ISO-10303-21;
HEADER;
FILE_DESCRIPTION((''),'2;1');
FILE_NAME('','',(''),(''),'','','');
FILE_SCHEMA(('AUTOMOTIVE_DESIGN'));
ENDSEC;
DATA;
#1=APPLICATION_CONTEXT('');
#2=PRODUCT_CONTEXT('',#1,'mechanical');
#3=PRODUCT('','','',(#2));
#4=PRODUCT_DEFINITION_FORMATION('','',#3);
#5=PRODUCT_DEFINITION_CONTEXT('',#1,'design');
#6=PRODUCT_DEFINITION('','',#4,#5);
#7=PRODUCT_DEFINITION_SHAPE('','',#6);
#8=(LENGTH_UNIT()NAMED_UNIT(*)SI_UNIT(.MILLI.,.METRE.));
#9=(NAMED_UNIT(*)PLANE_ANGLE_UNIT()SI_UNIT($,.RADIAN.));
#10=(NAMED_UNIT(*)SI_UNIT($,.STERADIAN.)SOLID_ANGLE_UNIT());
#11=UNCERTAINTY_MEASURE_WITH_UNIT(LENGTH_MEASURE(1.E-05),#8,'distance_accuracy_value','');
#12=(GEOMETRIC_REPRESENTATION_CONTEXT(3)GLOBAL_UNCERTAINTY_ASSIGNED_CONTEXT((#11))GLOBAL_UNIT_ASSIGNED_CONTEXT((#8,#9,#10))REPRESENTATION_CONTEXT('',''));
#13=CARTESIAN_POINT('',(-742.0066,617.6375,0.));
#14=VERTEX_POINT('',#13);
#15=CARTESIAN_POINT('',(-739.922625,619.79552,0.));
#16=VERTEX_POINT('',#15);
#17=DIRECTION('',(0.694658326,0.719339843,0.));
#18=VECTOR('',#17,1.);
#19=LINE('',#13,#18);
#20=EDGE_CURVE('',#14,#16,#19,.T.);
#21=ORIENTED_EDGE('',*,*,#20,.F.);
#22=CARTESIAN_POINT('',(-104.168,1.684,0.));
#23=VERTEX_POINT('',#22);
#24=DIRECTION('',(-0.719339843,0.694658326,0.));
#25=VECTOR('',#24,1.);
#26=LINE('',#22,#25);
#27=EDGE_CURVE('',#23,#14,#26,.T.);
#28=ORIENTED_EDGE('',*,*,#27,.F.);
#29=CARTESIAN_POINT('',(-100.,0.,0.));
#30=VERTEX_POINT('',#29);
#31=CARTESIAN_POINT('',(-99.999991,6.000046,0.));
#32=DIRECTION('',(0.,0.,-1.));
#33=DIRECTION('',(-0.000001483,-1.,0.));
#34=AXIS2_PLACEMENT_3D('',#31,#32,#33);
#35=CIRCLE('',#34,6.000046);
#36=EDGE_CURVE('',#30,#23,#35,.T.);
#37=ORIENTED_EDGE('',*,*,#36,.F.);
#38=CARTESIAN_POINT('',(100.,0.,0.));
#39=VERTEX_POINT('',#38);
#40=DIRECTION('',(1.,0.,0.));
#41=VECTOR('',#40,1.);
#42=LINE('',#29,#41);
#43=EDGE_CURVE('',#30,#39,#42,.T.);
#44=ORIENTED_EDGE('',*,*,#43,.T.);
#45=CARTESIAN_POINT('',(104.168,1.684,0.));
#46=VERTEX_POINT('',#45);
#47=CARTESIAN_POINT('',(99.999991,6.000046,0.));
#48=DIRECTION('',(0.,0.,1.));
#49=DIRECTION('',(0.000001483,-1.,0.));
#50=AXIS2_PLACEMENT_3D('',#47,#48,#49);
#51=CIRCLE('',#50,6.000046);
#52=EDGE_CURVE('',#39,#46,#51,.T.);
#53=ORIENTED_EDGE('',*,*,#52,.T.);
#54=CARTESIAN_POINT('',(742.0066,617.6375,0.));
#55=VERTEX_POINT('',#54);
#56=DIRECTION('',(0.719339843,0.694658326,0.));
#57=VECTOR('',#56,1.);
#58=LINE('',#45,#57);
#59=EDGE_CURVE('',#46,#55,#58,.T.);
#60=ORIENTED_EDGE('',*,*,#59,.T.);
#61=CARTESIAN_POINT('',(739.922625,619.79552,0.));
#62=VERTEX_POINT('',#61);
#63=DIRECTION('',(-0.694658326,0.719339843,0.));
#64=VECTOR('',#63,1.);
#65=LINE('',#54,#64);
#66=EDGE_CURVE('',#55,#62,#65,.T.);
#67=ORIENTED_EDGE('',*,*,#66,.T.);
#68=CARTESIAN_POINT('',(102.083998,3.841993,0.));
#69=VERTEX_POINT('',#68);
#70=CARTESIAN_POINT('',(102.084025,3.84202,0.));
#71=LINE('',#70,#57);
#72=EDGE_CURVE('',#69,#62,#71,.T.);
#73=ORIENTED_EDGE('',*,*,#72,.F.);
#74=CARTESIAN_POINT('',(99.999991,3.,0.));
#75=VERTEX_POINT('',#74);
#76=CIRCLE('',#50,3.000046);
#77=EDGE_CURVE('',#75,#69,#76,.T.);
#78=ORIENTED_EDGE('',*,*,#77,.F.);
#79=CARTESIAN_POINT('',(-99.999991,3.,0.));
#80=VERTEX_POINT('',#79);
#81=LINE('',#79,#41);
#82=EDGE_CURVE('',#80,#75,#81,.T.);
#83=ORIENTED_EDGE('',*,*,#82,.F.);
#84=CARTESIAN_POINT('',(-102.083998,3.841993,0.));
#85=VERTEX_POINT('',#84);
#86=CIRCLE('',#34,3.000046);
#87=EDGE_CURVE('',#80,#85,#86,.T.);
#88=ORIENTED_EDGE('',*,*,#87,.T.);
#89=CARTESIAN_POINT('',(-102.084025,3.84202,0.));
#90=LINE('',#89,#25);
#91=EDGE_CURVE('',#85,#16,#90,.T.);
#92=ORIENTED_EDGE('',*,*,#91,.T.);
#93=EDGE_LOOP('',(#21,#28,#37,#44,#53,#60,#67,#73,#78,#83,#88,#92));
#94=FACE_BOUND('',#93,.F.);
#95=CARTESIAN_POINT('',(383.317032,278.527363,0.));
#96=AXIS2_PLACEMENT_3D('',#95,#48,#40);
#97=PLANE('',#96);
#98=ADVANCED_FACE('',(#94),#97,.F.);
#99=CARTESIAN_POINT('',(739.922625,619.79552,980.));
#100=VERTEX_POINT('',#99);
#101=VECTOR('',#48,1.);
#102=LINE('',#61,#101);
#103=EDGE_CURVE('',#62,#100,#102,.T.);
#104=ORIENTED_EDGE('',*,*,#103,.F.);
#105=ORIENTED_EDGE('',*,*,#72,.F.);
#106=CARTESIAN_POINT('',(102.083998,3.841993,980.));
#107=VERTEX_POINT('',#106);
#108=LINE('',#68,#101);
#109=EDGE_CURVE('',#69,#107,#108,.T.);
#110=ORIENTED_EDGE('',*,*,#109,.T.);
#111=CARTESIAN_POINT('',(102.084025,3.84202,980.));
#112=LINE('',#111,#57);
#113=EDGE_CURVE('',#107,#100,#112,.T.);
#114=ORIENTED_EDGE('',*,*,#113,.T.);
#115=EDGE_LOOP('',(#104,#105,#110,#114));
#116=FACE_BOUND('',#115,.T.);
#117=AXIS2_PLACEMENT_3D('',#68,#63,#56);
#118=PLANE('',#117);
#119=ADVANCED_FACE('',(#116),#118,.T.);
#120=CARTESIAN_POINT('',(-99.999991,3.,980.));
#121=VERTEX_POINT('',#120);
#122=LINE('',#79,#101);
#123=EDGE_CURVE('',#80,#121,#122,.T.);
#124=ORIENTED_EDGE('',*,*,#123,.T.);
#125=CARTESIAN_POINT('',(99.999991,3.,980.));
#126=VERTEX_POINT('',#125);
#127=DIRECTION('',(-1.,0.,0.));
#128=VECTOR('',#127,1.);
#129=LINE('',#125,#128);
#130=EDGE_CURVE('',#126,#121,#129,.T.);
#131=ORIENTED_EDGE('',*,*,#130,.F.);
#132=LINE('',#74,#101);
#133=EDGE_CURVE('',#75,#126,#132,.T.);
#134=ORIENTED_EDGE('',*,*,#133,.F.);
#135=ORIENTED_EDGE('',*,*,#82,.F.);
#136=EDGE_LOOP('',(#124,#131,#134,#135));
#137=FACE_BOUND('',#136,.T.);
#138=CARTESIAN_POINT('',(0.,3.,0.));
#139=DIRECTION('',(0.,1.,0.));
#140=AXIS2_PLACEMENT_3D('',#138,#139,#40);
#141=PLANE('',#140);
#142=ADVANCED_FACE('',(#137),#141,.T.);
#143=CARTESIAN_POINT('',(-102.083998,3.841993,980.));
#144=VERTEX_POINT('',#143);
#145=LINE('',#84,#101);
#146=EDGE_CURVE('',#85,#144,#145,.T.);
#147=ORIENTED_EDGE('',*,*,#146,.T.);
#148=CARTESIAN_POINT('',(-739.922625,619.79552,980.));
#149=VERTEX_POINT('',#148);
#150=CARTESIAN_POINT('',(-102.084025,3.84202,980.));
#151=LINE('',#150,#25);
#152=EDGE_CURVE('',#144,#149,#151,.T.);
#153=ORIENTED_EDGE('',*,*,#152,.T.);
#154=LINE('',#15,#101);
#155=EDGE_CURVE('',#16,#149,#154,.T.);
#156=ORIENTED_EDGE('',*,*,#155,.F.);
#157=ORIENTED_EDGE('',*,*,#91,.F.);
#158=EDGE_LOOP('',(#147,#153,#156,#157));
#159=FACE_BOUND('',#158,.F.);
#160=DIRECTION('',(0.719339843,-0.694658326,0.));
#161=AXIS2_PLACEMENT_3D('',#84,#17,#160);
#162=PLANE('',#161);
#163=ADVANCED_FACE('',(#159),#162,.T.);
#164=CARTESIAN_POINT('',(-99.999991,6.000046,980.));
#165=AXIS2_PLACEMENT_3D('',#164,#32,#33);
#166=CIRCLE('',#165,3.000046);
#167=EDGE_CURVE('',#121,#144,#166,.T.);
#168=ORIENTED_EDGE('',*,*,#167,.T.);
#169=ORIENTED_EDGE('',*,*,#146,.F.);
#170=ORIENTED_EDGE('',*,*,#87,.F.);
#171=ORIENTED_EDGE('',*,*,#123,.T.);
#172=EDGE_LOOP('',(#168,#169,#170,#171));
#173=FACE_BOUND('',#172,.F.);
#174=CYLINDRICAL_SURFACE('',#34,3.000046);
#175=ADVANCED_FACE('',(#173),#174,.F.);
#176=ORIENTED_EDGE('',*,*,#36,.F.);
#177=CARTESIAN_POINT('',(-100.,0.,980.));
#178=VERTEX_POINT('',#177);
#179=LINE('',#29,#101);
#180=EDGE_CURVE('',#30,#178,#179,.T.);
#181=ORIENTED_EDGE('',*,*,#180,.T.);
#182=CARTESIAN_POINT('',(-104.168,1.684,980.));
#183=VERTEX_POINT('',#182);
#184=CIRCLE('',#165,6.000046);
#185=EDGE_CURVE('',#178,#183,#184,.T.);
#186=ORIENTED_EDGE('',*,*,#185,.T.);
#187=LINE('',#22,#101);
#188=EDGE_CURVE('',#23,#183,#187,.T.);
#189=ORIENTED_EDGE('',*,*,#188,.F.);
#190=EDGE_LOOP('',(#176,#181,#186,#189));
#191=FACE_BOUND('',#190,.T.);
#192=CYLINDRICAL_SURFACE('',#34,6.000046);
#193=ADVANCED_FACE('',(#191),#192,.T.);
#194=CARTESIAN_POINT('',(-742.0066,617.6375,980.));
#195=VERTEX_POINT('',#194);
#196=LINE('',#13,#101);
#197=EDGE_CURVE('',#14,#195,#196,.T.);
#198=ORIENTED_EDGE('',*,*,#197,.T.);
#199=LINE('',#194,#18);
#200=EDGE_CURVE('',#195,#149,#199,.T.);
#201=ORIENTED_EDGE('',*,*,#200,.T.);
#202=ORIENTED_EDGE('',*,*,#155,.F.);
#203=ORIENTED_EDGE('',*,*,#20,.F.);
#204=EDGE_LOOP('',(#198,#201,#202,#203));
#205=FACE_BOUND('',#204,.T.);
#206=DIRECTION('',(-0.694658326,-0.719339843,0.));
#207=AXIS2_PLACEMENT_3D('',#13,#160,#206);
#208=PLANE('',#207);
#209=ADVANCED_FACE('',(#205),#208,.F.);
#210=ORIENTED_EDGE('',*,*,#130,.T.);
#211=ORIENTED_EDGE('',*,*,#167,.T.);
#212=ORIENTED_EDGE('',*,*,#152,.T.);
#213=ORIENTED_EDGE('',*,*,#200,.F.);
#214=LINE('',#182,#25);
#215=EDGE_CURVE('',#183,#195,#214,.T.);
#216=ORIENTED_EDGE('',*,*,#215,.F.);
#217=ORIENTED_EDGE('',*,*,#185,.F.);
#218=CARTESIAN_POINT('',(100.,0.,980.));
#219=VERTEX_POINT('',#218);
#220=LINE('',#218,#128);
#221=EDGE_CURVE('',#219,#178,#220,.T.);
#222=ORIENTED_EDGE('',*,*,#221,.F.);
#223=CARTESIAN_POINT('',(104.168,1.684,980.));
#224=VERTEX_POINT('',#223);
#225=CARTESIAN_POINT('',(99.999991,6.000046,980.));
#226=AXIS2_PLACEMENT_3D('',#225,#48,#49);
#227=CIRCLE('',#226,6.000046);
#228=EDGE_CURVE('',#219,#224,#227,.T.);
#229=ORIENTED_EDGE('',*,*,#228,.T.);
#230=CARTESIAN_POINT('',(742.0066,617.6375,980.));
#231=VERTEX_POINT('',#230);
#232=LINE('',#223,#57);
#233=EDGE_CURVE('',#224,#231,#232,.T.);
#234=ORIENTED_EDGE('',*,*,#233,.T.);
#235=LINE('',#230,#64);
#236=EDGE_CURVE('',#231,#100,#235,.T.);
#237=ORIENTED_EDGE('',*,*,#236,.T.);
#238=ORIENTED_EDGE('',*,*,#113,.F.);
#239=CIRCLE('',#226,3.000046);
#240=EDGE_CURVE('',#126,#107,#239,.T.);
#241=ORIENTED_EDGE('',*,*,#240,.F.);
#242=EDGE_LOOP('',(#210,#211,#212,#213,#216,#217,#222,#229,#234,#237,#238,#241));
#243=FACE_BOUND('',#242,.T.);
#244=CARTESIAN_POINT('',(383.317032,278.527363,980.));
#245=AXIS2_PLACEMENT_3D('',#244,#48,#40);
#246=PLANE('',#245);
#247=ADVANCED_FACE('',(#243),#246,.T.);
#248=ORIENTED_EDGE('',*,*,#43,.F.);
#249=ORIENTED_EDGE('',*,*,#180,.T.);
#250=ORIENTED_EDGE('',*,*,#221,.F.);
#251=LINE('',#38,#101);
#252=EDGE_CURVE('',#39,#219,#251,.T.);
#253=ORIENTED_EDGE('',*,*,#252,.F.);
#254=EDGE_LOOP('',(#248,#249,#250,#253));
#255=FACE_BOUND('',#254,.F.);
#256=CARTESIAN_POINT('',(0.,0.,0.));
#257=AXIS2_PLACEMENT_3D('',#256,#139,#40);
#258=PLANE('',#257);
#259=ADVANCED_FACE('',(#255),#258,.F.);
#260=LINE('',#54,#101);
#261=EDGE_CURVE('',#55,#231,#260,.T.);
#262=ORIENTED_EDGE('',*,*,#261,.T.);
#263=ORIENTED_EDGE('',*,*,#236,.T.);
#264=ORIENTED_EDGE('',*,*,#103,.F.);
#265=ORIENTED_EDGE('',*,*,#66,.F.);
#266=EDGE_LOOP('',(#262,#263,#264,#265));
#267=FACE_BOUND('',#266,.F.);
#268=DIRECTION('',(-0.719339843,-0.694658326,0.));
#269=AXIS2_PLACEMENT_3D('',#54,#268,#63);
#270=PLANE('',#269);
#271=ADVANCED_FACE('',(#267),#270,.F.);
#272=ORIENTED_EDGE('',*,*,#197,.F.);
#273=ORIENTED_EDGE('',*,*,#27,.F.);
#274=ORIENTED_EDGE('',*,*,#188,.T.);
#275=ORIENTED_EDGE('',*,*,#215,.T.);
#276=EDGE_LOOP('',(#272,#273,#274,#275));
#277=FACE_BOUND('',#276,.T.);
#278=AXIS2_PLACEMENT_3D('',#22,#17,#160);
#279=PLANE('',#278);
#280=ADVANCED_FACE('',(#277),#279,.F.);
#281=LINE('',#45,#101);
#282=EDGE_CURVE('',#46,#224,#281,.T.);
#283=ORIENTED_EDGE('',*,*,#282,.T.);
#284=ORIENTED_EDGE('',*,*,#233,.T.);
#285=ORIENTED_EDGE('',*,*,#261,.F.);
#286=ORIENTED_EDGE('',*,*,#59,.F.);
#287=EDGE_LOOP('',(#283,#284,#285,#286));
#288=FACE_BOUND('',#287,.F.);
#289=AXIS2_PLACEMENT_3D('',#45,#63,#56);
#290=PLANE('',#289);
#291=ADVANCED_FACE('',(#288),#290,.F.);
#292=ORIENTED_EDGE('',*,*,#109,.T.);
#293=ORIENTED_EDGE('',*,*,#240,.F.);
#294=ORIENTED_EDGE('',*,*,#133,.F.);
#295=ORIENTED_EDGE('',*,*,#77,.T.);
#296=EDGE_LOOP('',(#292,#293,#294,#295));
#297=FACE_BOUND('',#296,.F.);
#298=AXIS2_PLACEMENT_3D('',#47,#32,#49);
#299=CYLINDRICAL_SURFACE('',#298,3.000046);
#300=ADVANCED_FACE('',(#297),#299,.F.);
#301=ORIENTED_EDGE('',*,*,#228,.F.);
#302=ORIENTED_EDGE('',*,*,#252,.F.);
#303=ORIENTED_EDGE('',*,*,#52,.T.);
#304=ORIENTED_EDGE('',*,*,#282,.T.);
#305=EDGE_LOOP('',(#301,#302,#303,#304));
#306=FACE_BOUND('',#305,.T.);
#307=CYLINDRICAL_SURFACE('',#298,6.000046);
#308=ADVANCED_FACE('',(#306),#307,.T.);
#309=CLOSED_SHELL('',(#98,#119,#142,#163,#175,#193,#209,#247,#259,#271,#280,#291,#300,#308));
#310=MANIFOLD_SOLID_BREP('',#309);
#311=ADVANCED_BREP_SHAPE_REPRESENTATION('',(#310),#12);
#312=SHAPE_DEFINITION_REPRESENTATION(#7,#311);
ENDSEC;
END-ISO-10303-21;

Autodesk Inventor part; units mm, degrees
ref_plane "YZ Plane" through (0, 0, 0) normal (1, 0, 0) x (0, 1, 0)
ref_plane "XZ Plane" through (0, 0, 0) normal (0, 1, 0) x (-1, 0, 0)
ref_plane "XY Plane" through (0, 0, 0) normal (0, 0, 1) x (1, 0, 0)
sketch "Sketch1" plane through (0, 0, 0) normal (0, 0, 1) x (1, 0, 0)
  line L0 (104.168, 1.684) -> (742.0066, 617.6375)
  arc A0 (100, 0) -> (104.168, 1.684) centre (100, 6) ccw
  line L1 (0, 0) -> (100, 0)
  dimension "d25" = 6
  dimension "d48" = 742.0065
  dimension "d49" = 136
  dimension "d50" = 100
  dimension "d51" = 886.7
contour flange "Contour Flange1" sketch "Sketch1" thickness 3 bend radius 3 width 980 along (0, 0, 1) mid plane no both sides no wall seen from (50, 0, 0) lies toward (0, 1, 0) curves L1 A0 L0
bend "Bend1"
corner "Corner1"
mirror "Mirror1" about plane through (0, 0, 0) normal (1, 0, 0)
sketch "Sketch2" plane through (-102.084, 3.842, 980) normal (0.6946584, 0.7193398, 0) x (0.7193398, -0.6946584, 0)
  line L0 (-842.2117, 70.9383) -> (-842.2117, 209.5784) construction
  line L1 (-842.2117, 209.5784) -> (-819.3515, 209.5784) construction
  line L2 (-819.3515, 209.5784) -> (-819.3515, 70.9383) construction
  line L3 (-819.3515, 70.9383) -> (-842.2117, 70.9383) construction
  point P0 (76.1019, 980)
mark "Mark1"
equation "\"d25\" = Thickness + BendRadius"
equation "\"d7\" = Thickness"
equation "\"d8\" = BendReliefWidth"
equation "\"d9\" = BendReliefDepth"
equation "\"d10\" = MinimumRemnant"
equation "\"d11\" = TransitionRadius"
equation "\"d13\" = BendRadius"
equation "\"d15\" = CornerReliefSize"
equation "\"d16\" = GapSize"
equation "\"d17\" = JacobiRadiusSize"
equation "\"BendRadius\" = Thickness"
equation "\"BendReliefWidth\" = Thickness"
equation "\"BendReliefDepth\" = 0.5 * Thickness"
equation "\"CornerReliefSize\" = 4 * Thickness"
equation "\"MinimumRemnant\" = 2 * Thickness"
equation "\"TransitionRadius\" = BendRadius"
equation "\"JacobiRadiusSize\" = BendRadius"
equation "\"GapSize\" = Thickness"
equation "\"d38\" = d40 + d44"
equation "\"d39\" = d40"
equation "\"d44\" = d40"
equation "\"Thickness\" = 3"
equation "\"d40\" = 3"
properties part number "MSC 501 SHEET BELLY MAIN" material "Stainless Steel"
